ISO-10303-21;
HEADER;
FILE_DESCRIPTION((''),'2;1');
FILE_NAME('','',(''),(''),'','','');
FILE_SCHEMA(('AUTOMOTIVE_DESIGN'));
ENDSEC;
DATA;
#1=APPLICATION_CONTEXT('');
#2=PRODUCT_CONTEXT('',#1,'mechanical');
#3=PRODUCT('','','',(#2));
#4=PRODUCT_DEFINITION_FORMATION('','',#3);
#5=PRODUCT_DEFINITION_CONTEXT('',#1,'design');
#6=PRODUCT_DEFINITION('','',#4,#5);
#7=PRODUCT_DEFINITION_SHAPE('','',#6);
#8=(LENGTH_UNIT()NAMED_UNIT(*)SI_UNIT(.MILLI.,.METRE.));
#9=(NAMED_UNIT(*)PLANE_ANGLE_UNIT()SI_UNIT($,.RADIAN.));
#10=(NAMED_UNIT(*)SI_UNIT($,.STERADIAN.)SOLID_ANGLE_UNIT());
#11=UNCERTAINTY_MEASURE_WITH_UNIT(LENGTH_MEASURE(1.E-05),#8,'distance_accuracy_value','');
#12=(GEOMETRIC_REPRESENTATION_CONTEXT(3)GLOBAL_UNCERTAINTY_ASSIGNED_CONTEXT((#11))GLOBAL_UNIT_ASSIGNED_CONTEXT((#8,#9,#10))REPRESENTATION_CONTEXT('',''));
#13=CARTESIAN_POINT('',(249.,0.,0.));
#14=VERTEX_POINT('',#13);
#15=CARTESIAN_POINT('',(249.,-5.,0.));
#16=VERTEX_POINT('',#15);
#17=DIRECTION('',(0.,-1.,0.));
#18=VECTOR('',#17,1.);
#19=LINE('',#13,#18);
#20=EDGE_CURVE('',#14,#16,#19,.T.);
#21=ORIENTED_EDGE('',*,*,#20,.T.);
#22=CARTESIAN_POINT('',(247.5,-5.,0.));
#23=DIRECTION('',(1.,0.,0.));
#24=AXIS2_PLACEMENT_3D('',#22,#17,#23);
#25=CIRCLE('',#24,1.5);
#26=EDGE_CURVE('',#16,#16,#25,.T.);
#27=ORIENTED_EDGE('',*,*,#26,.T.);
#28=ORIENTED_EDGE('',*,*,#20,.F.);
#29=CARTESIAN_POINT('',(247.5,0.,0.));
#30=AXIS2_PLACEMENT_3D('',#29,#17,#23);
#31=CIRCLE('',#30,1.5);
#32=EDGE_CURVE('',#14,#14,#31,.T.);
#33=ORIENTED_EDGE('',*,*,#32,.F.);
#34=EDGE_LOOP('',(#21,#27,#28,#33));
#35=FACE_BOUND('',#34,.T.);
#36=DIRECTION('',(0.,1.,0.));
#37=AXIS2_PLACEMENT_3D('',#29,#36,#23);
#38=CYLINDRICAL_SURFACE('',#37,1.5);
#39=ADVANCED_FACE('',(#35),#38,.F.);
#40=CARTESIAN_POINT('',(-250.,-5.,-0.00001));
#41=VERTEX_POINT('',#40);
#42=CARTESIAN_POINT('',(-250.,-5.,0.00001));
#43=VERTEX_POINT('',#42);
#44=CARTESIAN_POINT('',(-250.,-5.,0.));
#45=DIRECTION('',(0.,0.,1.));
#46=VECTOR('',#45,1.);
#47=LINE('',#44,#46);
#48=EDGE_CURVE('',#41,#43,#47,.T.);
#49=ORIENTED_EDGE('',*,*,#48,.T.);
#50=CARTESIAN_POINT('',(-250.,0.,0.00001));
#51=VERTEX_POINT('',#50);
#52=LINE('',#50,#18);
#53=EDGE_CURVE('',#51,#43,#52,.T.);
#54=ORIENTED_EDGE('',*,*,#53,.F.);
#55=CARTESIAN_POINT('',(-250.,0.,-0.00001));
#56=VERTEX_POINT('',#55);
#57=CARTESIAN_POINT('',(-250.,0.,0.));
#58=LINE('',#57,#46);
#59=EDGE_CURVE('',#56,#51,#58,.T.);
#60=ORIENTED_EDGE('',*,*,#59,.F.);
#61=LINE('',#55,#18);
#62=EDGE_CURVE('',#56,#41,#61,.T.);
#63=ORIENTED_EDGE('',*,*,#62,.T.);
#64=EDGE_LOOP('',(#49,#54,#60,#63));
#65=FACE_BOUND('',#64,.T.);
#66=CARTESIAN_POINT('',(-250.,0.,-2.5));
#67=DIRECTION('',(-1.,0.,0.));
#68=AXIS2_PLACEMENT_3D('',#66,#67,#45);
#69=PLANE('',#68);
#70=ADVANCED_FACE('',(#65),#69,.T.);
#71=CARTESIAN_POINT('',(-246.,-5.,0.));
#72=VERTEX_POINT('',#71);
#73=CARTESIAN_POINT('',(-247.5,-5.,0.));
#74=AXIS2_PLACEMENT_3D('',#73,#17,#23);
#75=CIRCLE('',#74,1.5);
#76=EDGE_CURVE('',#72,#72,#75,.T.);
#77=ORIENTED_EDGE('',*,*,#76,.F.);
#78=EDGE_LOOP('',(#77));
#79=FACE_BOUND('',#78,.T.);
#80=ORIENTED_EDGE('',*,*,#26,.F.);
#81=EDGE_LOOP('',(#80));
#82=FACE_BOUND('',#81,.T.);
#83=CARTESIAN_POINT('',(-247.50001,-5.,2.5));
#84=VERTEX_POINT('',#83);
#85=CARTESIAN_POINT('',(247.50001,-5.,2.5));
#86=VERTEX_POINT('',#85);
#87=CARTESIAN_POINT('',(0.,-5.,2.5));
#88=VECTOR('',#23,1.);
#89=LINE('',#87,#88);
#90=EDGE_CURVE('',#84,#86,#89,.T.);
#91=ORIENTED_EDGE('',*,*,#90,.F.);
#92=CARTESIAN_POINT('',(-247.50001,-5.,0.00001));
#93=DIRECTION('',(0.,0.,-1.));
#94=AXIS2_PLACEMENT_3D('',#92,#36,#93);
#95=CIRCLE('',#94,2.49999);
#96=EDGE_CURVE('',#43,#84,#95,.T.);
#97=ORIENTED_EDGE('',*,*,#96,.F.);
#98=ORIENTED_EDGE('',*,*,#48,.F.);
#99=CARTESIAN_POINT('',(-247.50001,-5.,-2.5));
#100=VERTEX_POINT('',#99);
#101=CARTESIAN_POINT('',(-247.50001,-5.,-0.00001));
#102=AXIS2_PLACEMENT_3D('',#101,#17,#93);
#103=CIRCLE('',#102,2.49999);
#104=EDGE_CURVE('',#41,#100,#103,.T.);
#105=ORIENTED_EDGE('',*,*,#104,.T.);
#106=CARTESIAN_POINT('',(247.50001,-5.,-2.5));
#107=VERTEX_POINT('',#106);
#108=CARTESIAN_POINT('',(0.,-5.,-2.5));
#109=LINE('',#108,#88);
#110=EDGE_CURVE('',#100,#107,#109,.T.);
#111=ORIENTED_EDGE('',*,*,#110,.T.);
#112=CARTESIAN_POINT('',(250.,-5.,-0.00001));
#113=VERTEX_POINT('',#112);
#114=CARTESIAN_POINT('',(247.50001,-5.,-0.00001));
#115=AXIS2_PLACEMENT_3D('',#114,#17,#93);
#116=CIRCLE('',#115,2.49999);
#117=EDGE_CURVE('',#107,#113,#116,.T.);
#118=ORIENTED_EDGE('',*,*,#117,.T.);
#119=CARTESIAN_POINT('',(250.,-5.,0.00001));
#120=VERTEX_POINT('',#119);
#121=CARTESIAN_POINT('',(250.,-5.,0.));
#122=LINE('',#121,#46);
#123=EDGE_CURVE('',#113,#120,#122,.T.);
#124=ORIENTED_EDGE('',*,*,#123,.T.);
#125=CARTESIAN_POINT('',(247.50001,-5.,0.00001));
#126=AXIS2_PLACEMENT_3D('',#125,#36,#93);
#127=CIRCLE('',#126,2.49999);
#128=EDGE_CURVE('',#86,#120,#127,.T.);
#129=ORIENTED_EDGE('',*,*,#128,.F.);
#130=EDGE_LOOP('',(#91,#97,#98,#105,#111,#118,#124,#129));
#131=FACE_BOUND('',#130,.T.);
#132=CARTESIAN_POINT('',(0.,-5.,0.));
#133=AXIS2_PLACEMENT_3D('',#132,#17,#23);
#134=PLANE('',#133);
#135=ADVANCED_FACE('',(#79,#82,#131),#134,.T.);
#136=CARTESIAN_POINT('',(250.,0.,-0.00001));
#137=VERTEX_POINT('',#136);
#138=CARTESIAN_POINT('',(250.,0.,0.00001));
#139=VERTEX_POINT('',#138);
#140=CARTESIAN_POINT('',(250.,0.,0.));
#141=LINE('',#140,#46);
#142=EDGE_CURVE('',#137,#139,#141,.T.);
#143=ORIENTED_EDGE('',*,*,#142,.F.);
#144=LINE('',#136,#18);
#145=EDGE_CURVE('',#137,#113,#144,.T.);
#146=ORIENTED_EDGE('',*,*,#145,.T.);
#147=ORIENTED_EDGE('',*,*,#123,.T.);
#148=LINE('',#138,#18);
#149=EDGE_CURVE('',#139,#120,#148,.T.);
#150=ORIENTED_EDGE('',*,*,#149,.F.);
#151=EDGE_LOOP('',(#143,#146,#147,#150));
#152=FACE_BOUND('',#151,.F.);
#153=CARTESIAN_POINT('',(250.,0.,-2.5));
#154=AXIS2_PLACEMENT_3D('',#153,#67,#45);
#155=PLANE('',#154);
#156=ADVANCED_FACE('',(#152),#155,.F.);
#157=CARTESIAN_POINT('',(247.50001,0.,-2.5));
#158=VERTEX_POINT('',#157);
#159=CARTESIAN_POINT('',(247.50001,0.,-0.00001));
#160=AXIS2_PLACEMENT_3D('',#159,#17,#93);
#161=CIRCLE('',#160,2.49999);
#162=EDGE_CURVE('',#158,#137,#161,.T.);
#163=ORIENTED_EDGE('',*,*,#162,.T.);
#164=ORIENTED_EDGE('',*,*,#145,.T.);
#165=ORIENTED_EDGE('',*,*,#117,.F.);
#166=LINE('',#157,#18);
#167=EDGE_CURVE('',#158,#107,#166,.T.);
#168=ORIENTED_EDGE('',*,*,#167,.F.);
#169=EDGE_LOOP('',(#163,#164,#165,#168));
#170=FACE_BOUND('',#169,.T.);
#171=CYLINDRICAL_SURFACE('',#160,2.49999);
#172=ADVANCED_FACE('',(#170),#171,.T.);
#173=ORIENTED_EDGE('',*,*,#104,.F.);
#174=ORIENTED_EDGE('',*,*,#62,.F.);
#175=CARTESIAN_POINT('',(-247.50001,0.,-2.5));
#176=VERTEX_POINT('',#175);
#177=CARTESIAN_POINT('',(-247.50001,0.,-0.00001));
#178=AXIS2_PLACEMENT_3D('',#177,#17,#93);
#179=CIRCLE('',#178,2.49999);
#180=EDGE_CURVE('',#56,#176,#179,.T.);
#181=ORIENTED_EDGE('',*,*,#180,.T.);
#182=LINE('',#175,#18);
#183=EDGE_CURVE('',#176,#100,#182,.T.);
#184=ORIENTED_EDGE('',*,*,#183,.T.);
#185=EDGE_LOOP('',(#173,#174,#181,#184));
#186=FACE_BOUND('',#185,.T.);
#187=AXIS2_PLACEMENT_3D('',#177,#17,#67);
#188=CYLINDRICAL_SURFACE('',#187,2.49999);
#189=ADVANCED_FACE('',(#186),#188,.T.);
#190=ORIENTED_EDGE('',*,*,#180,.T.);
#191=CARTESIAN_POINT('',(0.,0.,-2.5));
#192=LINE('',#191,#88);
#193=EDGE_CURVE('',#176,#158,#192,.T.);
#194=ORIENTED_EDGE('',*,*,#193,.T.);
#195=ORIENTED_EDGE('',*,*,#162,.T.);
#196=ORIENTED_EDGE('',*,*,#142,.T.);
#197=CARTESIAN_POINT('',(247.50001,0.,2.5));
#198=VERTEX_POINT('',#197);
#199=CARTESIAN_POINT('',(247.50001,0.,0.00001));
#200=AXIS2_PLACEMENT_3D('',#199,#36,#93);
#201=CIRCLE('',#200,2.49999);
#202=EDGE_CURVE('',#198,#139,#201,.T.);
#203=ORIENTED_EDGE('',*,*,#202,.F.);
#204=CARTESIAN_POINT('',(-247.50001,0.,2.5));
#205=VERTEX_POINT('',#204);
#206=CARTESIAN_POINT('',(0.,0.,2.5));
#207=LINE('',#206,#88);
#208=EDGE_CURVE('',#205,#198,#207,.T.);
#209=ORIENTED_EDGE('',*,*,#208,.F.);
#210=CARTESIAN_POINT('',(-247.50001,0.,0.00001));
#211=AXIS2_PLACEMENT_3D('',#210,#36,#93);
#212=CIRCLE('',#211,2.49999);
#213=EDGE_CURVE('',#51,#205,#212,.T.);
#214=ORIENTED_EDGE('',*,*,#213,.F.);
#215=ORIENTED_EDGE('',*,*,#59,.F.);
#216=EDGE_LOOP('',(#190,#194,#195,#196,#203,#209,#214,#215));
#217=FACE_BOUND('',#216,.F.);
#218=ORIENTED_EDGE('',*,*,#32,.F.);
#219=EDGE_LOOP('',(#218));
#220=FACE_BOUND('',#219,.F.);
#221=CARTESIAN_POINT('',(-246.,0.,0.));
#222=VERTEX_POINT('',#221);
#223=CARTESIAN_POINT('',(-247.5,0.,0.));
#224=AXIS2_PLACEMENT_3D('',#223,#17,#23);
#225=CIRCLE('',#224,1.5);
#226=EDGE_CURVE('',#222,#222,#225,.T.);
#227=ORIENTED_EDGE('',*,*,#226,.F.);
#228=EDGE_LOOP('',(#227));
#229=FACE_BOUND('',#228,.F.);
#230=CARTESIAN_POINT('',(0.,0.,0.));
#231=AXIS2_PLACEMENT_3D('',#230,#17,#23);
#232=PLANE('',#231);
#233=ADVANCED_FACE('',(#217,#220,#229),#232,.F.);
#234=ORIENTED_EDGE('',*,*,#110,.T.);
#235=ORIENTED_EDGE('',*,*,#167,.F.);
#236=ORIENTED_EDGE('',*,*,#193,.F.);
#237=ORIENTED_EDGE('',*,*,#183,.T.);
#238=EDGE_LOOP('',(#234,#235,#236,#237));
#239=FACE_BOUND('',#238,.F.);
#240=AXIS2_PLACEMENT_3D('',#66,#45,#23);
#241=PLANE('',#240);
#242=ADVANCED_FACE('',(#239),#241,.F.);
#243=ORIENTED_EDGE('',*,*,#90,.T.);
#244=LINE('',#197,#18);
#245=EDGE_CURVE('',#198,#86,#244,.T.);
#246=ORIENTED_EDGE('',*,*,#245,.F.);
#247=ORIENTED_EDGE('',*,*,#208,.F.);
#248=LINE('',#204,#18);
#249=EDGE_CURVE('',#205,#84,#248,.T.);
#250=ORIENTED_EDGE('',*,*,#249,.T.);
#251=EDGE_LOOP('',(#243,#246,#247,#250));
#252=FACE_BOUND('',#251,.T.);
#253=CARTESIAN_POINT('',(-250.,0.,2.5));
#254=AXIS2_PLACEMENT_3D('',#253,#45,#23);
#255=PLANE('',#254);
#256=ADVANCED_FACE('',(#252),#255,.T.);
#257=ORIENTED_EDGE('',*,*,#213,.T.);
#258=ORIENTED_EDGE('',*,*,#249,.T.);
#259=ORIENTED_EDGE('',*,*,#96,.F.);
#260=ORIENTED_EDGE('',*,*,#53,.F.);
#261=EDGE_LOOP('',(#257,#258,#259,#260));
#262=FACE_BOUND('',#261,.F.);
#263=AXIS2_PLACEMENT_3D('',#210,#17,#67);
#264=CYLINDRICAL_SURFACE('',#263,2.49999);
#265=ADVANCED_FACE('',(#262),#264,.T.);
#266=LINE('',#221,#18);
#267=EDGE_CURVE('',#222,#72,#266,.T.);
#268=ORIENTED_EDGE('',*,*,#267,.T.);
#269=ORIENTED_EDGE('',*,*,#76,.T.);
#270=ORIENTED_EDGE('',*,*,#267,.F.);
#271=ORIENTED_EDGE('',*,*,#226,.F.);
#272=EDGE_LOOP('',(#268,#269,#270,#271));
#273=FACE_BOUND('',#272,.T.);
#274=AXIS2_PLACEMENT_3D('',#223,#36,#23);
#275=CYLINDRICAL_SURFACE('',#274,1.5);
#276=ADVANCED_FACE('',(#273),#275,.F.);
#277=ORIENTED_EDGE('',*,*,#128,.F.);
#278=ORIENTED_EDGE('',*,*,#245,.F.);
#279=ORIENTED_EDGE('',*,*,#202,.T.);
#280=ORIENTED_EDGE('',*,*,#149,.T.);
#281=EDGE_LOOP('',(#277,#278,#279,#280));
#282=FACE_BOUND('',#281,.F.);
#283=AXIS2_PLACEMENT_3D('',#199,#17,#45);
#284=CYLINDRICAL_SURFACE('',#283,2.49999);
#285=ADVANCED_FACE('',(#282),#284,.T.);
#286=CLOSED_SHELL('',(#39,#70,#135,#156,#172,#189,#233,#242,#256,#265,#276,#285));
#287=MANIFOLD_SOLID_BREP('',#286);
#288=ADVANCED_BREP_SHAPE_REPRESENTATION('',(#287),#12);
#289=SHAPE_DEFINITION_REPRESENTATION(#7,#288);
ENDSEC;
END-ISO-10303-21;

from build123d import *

# Parameters (mm, degrees)
F0_W     = 500
F0_H     = 5
F0_R     = 1.5
F1_DEPTH = 5
F2_R     = 2.49999


# Not quite as in the source:
# - a fillet or chamfer is up to 0.001 mm smaller than in the source, because OpenCascade refuses the exact size


with BuildPart() as f1:
    # F0 (on Front) → F1 (new body)
    with BuildSketch(Plane.XZ):
        Rectangle(F0_W, F0_H)
        with Locations((-247.5, 0)):
            Circle(F0_R, mode=Mode.SUBTRACT)
        with Locations((247.5, 0)):
            Circle(F0_R, mode=Mode.SUBTRACT)
    extrude(amount=F1_DEPTH)

    # F2 (radius 2.5 in the source; OpenCascade refuses exactly that, so slightly less here)
    f2_edges = [f1.edges().sort_by_distance(p)[0] for p in [
        (250, -2.5, 2.5),
        (250, -2.5, -2.5),
        (-250, -2.5, 2.5),
        (-250, -2.5, -2.5),
    ]]
    fillet(f2_edges, radius=F2_R)


solid = f1.part
